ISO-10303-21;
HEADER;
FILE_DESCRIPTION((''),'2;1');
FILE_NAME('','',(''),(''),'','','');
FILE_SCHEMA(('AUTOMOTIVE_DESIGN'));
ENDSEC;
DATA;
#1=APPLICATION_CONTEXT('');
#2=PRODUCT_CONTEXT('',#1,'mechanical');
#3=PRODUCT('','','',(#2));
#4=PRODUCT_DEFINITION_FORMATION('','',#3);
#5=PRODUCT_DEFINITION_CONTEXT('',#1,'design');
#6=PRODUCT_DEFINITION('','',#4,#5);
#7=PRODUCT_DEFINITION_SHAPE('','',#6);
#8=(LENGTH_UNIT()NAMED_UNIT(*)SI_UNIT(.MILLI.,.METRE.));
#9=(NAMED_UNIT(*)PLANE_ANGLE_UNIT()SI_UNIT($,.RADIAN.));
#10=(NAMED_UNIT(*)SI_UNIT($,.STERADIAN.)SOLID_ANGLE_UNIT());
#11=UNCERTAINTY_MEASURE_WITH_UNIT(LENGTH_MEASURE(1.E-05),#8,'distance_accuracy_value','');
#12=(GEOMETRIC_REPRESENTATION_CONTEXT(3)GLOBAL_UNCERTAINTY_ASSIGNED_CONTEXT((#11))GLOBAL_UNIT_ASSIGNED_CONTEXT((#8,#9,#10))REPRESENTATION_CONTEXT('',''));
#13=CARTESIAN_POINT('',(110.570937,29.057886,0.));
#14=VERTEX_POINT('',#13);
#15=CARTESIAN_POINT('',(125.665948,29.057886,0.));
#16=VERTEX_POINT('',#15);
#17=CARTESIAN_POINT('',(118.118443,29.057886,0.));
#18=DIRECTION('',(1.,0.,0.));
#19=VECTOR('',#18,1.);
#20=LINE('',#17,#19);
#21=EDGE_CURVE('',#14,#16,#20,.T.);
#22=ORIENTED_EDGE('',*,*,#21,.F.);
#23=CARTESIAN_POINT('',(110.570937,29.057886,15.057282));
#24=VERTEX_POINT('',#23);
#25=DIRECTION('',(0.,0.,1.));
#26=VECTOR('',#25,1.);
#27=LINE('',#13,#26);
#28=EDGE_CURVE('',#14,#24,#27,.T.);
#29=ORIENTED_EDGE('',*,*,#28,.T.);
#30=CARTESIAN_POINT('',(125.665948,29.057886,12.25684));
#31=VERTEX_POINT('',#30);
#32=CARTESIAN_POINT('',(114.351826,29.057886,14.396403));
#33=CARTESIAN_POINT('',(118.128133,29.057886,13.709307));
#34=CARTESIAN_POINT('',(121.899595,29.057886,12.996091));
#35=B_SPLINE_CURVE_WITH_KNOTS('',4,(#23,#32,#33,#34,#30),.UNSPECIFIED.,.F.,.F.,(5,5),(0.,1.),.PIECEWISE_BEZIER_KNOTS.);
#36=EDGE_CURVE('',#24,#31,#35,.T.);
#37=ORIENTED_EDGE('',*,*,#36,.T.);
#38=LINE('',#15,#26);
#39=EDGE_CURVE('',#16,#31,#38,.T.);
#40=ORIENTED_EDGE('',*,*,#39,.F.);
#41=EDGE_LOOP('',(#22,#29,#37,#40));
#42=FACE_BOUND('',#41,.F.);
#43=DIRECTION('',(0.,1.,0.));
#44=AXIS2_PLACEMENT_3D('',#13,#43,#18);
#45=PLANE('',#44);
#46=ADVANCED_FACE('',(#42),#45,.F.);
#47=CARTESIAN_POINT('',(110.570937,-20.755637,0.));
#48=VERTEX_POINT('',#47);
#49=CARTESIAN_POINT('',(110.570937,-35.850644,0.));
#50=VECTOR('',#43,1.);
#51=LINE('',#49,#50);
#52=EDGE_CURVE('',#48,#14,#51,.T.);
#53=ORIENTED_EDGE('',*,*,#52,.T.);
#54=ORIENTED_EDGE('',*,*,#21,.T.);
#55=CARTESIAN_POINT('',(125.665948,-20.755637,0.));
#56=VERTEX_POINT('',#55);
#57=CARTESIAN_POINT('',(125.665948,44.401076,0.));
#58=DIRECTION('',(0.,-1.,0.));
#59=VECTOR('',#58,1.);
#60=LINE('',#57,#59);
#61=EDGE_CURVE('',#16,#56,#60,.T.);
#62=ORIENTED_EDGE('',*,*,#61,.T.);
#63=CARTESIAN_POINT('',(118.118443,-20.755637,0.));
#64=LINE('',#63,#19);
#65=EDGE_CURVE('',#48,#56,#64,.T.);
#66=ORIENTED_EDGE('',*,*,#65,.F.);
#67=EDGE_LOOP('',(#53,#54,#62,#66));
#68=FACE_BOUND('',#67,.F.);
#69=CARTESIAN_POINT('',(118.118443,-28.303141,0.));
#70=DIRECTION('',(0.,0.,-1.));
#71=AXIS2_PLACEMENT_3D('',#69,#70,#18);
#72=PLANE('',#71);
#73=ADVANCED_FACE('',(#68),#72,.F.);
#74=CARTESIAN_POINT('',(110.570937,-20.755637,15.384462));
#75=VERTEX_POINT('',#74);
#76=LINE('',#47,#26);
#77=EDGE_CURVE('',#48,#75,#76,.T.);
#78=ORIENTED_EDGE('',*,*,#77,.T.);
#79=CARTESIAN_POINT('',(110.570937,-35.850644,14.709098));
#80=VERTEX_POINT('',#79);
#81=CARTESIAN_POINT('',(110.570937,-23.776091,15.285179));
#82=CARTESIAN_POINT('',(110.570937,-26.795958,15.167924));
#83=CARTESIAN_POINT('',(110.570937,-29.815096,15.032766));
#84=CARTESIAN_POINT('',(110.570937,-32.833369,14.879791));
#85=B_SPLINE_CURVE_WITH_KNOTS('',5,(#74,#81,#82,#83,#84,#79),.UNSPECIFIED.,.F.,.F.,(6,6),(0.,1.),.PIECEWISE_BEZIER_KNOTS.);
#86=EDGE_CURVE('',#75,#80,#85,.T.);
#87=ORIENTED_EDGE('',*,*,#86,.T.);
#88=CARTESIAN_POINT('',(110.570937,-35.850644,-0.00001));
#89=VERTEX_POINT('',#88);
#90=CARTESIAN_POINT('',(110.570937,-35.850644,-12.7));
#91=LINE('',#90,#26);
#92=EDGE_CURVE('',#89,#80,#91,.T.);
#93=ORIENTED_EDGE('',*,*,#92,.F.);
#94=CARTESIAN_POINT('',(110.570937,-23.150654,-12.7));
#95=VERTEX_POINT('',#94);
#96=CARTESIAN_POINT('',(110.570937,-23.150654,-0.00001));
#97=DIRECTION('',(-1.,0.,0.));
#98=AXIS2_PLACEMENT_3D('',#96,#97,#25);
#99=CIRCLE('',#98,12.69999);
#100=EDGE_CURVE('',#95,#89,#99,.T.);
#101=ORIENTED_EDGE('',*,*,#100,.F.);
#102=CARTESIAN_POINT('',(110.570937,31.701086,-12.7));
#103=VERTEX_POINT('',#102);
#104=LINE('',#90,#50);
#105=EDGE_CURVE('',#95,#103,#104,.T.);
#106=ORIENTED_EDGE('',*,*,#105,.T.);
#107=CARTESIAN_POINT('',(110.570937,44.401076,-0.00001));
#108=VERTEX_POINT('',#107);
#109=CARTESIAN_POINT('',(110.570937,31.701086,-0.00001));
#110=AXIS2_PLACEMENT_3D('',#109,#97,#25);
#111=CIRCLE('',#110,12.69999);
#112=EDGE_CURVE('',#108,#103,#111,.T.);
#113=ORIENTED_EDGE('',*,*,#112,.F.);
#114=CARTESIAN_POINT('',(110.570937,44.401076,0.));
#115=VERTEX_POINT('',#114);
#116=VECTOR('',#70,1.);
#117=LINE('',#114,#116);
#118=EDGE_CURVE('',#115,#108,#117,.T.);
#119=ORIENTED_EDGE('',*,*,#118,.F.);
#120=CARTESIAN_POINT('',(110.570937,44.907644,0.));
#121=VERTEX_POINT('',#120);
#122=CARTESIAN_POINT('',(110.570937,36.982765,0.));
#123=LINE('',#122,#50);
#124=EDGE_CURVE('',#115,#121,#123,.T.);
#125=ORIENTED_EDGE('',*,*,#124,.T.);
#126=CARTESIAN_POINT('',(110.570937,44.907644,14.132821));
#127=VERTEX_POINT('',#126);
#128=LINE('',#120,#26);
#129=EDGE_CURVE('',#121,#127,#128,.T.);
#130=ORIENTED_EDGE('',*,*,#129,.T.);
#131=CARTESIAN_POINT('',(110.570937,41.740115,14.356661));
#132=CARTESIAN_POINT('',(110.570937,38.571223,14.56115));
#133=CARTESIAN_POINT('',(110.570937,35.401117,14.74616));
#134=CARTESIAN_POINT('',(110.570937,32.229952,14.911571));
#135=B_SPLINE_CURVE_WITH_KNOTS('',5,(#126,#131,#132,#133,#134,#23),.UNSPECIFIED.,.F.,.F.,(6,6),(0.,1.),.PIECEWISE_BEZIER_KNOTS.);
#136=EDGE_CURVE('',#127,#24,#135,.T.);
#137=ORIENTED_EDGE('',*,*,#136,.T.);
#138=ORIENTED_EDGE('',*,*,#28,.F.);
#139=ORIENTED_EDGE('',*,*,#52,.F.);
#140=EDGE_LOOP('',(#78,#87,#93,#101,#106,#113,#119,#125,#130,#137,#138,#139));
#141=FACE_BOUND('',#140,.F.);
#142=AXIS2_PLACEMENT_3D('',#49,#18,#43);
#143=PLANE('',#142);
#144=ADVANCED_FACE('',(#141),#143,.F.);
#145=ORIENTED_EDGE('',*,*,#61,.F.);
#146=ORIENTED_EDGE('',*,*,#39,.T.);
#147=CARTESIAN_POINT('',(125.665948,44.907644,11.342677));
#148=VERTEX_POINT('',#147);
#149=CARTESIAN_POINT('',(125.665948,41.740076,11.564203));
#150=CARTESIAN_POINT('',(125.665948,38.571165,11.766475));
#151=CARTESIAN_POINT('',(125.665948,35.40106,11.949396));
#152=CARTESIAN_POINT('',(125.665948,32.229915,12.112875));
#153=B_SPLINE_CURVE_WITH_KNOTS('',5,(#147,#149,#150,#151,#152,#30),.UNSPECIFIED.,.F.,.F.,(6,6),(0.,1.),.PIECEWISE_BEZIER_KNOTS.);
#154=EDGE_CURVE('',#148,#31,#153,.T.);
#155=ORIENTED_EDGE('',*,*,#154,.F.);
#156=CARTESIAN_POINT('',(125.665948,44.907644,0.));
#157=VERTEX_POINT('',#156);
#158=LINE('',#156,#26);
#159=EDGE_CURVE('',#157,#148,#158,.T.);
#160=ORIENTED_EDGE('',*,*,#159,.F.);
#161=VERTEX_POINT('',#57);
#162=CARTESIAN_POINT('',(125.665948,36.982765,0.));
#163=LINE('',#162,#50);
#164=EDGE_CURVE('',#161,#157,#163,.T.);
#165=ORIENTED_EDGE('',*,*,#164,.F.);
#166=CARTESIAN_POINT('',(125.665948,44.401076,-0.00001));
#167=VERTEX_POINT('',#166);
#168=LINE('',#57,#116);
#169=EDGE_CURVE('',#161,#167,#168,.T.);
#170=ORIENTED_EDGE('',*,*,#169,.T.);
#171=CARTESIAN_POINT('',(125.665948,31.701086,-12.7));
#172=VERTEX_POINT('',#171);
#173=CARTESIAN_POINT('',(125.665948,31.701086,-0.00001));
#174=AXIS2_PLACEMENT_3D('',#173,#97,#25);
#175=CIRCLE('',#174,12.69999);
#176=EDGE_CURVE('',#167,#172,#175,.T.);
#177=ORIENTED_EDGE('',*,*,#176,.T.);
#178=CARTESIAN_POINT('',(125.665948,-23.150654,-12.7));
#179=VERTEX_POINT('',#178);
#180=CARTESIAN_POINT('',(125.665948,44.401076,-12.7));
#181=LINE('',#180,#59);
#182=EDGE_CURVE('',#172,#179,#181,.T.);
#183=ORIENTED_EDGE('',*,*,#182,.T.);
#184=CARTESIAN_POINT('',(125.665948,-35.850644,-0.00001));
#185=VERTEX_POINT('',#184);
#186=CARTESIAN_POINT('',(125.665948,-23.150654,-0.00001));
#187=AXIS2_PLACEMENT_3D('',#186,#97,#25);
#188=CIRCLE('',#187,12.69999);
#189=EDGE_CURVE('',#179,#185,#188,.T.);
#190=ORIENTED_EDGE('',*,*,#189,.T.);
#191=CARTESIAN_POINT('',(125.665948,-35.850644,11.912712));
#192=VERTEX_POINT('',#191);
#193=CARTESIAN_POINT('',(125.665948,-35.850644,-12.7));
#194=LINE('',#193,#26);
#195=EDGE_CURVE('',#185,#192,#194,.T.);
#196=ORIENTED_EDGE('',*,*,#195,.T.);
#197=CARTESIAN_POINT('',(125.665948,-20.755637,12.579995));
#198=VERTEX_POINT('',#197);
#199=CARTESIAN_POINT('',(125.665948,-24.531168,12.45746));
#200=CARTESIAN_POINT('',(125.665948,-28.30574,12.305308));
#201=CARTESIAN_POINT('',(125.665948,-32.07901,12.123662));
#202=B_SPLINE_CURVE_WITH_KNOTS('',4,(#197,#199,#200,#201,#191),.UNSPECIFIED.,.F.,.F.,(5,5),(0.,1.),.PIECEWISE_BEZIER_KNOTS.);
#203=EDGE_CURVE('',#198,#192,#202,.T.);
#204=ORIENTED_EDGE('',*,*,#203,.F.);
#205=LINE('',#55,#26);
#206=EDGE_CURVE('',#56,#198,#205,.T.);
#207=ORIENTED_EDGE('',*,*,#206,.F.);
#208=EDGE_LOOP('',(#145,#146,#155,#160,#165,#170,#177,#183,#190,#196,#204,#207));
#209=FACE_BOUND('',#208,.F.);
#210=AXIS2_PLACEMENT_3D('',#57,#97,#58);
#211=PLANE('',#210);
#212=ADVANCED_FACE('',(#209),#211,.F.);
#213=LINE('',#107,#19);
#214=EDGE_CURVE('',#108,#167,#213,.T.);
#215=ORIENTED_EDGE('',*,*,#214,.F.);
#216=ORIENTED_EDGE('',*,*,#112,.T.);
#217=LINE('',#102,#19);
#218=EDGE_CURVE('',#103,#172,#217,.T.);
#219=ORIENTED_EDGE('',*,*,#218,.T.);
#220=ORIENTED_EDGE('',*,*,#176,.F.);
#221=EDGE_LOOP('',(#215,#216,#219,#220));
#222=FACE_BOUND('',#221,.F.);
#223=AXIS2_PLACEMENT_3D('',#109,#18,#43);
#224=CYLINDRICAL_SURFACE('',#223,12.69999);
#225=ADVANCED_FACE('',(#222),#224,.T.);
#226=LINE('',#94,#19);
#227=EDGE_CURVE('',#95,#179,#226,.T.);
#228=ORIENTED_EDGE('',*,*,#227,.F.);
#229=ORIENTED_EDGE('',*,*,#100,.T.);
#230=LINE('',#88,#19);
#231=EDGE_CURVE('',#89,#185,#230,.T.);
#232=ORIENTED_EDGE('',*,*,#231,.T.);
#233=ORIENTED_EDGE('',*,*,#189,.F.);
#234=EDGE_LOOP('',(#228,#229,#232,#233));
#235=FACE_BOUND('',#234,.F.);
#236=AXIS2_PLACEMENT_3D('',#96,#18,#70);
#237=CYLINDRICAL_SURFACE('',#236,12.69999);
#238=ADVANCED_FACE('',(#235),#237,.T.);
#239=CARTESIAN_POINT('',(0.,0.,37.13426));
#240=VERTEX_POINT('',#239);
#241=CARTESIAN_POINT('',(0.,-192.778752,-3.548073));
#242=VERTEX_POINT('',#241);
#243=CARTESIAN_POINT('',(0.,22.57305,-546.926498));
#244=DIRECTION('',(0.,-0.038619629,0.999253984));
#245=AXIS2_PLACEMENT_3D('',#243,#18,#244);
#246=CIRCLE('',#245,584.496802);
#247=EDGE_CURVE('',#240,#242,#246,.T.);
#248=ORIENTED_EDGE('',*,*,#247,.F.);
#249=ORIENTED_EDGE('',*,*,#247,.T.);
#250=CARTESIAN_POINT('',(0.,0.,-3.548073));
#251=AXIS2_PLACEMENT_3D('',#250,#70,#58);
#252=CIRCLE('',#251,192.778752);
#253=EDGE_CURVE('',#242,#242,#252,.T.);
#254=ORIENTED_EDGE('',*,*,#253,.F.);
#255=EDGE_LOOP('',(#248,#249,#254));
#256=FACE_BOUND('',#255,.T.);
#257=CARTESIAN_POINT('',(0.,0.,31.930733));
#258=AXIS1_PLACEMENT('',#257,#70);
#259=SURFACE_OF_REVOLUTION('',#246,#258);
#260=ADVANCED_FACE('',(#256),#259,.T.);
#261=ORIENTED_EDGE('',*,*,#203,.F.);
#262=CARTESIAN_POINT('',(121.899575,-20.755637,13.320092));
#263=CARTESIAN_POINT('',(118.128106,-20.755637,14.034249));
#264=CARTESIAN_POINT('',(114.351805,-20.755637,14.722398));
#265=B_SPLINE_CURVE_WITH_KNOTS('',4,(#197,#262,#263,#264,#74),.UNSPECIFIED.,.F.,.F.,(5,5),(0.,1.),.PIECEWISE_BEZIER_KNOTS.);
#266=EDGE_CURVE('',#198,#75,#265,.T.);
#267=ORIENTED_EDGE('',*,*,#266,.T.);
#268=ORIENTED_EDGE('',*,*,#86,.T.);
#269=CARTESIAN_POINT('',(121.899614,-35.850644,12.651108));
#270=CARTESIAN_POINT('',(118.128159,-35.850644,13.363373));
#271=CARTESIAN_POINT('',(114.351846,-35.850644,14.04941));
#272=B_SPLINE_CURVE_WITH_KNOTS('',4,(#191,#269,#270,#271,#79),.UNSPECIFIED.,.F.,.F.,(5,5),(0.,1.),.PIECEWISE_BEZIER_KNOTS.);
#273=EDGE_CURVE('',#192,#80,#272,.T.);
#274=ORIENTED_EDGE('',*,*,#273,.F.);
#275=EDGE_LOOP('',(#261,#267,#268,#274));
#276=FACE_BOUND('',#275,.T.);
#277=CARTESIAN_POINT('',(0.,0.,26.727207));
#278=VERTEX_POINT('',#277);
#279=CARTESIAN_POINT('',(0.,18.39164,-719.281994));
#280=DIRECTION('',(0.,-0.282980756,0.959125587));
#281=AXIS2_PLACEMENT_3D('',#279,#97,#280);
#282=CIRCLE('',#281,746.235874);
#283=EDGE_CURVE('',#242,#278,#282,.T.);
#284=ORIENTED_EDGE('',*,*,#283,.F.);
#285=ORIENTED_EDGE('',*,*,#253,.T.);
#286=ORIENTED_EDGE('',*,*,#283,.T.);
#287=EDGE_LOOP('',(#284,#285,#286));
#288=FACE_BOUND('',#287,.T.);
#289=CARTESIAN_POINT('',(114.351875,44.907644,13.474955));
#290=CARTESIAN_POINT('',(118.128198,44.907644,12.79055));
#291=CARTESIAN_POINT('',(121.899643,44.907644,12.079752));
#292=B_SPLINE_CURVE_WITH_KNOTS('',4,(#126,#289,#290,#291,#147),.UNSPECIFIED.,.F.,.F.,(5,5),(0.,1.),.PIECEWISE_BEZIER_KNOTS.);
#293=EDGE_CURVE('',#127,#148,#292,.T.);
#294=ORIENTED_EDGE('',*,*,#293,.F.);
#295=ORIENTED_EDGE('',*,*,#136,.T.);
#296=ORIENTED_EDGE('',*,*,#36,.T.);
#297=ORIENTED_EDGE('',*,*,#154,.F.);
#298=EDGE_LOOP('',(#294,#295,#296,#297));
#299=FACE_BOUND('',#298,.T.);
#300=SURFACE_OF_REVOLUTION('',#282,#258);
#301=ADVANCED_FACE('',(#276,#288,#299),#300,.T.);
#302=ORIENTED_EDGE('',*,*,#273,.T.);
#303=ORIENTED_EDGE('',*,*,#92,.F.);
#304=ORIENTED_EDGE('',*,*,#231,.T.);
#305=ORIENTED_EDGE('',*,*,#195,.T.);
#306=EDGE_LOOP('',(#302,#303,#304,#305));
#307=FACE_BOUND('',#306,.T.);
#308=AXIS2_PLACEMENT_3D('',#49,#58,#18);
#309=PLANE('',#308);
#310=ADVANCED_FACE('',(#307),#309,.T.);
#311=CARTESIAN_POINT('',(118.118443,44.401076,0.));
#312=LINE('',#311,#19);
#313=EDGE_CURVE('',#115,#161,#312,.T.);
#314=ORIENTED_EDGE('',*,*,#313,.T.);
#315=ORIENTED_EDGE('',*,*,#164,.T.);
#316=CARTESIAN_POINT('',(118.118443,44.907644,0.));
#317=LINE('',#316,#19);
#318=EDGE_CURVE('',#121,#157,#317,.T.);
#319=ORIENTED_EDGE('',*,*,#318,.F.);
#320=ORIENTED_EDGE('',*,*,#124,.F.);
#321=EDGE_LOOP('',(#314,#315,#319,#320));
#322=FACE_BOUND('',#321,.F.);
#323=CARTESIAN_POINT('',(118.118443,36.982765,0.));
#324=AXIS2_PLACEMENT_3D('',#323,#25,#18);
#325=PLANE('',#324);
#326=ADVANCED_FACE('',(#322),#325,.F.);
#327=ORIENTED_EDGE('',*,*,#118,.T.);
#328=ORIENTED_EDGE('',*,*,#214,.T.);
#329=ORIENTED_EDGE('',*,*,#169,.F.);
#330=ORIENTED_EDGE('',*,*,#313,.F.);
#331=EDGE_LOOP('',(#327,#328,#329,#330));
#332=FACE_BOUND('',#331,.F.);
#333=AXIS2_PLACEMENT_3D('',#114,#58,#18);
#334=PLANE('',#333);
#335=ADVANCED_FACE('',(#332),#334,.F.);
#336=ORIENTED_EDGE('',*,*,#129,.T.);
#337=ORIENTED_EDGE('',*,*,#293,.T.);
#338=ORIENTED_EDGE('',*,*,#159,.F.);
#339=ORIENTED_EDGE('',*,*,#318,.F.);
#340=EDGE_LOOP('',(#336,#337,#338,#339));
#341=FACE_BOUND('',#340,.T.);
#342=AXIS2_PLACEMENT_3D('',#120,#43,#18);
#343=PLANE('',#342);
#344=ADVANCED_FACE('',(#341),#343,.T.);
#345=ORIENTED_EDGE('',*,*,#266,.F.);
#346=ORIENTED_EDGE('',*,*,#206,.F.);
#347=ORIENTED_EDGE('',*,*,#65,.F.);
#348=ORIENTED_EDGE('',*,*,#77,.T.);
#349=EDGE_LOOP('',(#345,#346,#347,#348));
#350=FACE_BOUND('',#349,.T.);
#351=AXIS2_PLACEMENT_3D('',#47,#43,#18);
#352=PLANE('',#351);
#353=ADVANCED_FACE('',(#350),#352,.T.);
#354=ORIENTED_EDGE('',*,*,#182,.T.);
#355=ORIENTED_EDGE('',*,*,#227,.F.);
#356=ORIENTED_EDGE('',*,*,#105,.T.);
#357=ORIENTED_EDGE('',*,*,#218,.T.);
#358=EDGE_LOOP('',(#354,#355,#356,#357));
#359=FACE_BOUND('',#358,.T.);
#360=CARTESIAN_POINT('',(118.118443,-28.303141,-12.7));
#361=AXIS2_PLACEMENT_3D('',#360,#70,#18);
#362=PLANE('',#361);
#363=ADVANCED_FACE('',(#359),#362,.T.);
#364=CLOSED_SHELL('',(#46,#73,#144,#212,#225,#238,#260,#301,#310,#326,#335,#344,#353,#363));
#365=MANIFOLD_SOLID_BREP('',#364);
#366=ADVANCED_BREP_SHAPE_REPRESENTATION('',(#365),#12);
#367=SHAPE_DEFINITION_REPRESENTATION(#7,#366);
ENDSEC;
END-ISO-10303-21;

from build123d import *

# Parameters (mm, degrees)
F2_W     = 15.0950103998
F2_H     = 15.0950066745
F2_H_2   = 15.8497579396
F4_W     = 15.0950103998
F4_H     = 15.0950066745
F4_H_2   = 65.1567131281
F5_DEPTH = 12.7
F6_R     = 12.69999


# Not quite as in the source:
# - a fillet or chamfer is up to 0.001 mm smaller than in the source, because OpenCascade refuses the exact size


with BuildPart() as f1:
    # F0 (on Right) → F1 (revolve)
    with BuildSketch(Plane.YZ):
        with BuildLine():
            Line((0, 26.727207005), (0, 37.1342599392))
            ThreePointArc((0, 37.1342599392), (-98.115896576, 24.9744460148), (-192.7787518116, -3.5480727068))
            ThreePointArc((-192.7787518116, -3.5480727068), (-97.3832698601, 17.9182167193), (0, 26.727207005))
        make_face()
    revolve(axis=Axis((0, 0, 31.9307334721), (0, 0, -1)))

    # F2 (on Top) → F3 (join, up to the next surface of F1)
    with BuildSketch(Plane.XY):
        with Locations((118.118442595, -28.3031407744)):
            Rectangle(F2_W, F2_H)
        with Locations((118.118442595, 36.9827654213)):
            Rectangle(F2_W, F2_H_2)
    extrude(until=Until.NEXT)

    # F4 (on face) → F5 (join)
    with BuildSketch(Plane(origin=(0, 0, 0), x_dir=(1, 0, 0), z_dir=(0, 0, -1))):
        with Locations((118.118442595, 28.3031407744)):
            Rectangle(F4_W, F4_H)
        with Locations((118.118442595, -11.8227191269)):
            Rectangle(F4_W, F4_H_2)
    extrude(amount=F5_DEPTH)

    # F6 (radius 12.7 in the source; OpenCascade refuses exactly that, so slightly less here)
    f6_edges = [f1.edges().sort_by_distance(p)[0] for p in [
        (118.118443, -35.850644, -12.7),
        (118.118443, 44.401076, -12.7),
    ]]
    fillet(f6_edges, radius=F6_R)


solid = f1.part
